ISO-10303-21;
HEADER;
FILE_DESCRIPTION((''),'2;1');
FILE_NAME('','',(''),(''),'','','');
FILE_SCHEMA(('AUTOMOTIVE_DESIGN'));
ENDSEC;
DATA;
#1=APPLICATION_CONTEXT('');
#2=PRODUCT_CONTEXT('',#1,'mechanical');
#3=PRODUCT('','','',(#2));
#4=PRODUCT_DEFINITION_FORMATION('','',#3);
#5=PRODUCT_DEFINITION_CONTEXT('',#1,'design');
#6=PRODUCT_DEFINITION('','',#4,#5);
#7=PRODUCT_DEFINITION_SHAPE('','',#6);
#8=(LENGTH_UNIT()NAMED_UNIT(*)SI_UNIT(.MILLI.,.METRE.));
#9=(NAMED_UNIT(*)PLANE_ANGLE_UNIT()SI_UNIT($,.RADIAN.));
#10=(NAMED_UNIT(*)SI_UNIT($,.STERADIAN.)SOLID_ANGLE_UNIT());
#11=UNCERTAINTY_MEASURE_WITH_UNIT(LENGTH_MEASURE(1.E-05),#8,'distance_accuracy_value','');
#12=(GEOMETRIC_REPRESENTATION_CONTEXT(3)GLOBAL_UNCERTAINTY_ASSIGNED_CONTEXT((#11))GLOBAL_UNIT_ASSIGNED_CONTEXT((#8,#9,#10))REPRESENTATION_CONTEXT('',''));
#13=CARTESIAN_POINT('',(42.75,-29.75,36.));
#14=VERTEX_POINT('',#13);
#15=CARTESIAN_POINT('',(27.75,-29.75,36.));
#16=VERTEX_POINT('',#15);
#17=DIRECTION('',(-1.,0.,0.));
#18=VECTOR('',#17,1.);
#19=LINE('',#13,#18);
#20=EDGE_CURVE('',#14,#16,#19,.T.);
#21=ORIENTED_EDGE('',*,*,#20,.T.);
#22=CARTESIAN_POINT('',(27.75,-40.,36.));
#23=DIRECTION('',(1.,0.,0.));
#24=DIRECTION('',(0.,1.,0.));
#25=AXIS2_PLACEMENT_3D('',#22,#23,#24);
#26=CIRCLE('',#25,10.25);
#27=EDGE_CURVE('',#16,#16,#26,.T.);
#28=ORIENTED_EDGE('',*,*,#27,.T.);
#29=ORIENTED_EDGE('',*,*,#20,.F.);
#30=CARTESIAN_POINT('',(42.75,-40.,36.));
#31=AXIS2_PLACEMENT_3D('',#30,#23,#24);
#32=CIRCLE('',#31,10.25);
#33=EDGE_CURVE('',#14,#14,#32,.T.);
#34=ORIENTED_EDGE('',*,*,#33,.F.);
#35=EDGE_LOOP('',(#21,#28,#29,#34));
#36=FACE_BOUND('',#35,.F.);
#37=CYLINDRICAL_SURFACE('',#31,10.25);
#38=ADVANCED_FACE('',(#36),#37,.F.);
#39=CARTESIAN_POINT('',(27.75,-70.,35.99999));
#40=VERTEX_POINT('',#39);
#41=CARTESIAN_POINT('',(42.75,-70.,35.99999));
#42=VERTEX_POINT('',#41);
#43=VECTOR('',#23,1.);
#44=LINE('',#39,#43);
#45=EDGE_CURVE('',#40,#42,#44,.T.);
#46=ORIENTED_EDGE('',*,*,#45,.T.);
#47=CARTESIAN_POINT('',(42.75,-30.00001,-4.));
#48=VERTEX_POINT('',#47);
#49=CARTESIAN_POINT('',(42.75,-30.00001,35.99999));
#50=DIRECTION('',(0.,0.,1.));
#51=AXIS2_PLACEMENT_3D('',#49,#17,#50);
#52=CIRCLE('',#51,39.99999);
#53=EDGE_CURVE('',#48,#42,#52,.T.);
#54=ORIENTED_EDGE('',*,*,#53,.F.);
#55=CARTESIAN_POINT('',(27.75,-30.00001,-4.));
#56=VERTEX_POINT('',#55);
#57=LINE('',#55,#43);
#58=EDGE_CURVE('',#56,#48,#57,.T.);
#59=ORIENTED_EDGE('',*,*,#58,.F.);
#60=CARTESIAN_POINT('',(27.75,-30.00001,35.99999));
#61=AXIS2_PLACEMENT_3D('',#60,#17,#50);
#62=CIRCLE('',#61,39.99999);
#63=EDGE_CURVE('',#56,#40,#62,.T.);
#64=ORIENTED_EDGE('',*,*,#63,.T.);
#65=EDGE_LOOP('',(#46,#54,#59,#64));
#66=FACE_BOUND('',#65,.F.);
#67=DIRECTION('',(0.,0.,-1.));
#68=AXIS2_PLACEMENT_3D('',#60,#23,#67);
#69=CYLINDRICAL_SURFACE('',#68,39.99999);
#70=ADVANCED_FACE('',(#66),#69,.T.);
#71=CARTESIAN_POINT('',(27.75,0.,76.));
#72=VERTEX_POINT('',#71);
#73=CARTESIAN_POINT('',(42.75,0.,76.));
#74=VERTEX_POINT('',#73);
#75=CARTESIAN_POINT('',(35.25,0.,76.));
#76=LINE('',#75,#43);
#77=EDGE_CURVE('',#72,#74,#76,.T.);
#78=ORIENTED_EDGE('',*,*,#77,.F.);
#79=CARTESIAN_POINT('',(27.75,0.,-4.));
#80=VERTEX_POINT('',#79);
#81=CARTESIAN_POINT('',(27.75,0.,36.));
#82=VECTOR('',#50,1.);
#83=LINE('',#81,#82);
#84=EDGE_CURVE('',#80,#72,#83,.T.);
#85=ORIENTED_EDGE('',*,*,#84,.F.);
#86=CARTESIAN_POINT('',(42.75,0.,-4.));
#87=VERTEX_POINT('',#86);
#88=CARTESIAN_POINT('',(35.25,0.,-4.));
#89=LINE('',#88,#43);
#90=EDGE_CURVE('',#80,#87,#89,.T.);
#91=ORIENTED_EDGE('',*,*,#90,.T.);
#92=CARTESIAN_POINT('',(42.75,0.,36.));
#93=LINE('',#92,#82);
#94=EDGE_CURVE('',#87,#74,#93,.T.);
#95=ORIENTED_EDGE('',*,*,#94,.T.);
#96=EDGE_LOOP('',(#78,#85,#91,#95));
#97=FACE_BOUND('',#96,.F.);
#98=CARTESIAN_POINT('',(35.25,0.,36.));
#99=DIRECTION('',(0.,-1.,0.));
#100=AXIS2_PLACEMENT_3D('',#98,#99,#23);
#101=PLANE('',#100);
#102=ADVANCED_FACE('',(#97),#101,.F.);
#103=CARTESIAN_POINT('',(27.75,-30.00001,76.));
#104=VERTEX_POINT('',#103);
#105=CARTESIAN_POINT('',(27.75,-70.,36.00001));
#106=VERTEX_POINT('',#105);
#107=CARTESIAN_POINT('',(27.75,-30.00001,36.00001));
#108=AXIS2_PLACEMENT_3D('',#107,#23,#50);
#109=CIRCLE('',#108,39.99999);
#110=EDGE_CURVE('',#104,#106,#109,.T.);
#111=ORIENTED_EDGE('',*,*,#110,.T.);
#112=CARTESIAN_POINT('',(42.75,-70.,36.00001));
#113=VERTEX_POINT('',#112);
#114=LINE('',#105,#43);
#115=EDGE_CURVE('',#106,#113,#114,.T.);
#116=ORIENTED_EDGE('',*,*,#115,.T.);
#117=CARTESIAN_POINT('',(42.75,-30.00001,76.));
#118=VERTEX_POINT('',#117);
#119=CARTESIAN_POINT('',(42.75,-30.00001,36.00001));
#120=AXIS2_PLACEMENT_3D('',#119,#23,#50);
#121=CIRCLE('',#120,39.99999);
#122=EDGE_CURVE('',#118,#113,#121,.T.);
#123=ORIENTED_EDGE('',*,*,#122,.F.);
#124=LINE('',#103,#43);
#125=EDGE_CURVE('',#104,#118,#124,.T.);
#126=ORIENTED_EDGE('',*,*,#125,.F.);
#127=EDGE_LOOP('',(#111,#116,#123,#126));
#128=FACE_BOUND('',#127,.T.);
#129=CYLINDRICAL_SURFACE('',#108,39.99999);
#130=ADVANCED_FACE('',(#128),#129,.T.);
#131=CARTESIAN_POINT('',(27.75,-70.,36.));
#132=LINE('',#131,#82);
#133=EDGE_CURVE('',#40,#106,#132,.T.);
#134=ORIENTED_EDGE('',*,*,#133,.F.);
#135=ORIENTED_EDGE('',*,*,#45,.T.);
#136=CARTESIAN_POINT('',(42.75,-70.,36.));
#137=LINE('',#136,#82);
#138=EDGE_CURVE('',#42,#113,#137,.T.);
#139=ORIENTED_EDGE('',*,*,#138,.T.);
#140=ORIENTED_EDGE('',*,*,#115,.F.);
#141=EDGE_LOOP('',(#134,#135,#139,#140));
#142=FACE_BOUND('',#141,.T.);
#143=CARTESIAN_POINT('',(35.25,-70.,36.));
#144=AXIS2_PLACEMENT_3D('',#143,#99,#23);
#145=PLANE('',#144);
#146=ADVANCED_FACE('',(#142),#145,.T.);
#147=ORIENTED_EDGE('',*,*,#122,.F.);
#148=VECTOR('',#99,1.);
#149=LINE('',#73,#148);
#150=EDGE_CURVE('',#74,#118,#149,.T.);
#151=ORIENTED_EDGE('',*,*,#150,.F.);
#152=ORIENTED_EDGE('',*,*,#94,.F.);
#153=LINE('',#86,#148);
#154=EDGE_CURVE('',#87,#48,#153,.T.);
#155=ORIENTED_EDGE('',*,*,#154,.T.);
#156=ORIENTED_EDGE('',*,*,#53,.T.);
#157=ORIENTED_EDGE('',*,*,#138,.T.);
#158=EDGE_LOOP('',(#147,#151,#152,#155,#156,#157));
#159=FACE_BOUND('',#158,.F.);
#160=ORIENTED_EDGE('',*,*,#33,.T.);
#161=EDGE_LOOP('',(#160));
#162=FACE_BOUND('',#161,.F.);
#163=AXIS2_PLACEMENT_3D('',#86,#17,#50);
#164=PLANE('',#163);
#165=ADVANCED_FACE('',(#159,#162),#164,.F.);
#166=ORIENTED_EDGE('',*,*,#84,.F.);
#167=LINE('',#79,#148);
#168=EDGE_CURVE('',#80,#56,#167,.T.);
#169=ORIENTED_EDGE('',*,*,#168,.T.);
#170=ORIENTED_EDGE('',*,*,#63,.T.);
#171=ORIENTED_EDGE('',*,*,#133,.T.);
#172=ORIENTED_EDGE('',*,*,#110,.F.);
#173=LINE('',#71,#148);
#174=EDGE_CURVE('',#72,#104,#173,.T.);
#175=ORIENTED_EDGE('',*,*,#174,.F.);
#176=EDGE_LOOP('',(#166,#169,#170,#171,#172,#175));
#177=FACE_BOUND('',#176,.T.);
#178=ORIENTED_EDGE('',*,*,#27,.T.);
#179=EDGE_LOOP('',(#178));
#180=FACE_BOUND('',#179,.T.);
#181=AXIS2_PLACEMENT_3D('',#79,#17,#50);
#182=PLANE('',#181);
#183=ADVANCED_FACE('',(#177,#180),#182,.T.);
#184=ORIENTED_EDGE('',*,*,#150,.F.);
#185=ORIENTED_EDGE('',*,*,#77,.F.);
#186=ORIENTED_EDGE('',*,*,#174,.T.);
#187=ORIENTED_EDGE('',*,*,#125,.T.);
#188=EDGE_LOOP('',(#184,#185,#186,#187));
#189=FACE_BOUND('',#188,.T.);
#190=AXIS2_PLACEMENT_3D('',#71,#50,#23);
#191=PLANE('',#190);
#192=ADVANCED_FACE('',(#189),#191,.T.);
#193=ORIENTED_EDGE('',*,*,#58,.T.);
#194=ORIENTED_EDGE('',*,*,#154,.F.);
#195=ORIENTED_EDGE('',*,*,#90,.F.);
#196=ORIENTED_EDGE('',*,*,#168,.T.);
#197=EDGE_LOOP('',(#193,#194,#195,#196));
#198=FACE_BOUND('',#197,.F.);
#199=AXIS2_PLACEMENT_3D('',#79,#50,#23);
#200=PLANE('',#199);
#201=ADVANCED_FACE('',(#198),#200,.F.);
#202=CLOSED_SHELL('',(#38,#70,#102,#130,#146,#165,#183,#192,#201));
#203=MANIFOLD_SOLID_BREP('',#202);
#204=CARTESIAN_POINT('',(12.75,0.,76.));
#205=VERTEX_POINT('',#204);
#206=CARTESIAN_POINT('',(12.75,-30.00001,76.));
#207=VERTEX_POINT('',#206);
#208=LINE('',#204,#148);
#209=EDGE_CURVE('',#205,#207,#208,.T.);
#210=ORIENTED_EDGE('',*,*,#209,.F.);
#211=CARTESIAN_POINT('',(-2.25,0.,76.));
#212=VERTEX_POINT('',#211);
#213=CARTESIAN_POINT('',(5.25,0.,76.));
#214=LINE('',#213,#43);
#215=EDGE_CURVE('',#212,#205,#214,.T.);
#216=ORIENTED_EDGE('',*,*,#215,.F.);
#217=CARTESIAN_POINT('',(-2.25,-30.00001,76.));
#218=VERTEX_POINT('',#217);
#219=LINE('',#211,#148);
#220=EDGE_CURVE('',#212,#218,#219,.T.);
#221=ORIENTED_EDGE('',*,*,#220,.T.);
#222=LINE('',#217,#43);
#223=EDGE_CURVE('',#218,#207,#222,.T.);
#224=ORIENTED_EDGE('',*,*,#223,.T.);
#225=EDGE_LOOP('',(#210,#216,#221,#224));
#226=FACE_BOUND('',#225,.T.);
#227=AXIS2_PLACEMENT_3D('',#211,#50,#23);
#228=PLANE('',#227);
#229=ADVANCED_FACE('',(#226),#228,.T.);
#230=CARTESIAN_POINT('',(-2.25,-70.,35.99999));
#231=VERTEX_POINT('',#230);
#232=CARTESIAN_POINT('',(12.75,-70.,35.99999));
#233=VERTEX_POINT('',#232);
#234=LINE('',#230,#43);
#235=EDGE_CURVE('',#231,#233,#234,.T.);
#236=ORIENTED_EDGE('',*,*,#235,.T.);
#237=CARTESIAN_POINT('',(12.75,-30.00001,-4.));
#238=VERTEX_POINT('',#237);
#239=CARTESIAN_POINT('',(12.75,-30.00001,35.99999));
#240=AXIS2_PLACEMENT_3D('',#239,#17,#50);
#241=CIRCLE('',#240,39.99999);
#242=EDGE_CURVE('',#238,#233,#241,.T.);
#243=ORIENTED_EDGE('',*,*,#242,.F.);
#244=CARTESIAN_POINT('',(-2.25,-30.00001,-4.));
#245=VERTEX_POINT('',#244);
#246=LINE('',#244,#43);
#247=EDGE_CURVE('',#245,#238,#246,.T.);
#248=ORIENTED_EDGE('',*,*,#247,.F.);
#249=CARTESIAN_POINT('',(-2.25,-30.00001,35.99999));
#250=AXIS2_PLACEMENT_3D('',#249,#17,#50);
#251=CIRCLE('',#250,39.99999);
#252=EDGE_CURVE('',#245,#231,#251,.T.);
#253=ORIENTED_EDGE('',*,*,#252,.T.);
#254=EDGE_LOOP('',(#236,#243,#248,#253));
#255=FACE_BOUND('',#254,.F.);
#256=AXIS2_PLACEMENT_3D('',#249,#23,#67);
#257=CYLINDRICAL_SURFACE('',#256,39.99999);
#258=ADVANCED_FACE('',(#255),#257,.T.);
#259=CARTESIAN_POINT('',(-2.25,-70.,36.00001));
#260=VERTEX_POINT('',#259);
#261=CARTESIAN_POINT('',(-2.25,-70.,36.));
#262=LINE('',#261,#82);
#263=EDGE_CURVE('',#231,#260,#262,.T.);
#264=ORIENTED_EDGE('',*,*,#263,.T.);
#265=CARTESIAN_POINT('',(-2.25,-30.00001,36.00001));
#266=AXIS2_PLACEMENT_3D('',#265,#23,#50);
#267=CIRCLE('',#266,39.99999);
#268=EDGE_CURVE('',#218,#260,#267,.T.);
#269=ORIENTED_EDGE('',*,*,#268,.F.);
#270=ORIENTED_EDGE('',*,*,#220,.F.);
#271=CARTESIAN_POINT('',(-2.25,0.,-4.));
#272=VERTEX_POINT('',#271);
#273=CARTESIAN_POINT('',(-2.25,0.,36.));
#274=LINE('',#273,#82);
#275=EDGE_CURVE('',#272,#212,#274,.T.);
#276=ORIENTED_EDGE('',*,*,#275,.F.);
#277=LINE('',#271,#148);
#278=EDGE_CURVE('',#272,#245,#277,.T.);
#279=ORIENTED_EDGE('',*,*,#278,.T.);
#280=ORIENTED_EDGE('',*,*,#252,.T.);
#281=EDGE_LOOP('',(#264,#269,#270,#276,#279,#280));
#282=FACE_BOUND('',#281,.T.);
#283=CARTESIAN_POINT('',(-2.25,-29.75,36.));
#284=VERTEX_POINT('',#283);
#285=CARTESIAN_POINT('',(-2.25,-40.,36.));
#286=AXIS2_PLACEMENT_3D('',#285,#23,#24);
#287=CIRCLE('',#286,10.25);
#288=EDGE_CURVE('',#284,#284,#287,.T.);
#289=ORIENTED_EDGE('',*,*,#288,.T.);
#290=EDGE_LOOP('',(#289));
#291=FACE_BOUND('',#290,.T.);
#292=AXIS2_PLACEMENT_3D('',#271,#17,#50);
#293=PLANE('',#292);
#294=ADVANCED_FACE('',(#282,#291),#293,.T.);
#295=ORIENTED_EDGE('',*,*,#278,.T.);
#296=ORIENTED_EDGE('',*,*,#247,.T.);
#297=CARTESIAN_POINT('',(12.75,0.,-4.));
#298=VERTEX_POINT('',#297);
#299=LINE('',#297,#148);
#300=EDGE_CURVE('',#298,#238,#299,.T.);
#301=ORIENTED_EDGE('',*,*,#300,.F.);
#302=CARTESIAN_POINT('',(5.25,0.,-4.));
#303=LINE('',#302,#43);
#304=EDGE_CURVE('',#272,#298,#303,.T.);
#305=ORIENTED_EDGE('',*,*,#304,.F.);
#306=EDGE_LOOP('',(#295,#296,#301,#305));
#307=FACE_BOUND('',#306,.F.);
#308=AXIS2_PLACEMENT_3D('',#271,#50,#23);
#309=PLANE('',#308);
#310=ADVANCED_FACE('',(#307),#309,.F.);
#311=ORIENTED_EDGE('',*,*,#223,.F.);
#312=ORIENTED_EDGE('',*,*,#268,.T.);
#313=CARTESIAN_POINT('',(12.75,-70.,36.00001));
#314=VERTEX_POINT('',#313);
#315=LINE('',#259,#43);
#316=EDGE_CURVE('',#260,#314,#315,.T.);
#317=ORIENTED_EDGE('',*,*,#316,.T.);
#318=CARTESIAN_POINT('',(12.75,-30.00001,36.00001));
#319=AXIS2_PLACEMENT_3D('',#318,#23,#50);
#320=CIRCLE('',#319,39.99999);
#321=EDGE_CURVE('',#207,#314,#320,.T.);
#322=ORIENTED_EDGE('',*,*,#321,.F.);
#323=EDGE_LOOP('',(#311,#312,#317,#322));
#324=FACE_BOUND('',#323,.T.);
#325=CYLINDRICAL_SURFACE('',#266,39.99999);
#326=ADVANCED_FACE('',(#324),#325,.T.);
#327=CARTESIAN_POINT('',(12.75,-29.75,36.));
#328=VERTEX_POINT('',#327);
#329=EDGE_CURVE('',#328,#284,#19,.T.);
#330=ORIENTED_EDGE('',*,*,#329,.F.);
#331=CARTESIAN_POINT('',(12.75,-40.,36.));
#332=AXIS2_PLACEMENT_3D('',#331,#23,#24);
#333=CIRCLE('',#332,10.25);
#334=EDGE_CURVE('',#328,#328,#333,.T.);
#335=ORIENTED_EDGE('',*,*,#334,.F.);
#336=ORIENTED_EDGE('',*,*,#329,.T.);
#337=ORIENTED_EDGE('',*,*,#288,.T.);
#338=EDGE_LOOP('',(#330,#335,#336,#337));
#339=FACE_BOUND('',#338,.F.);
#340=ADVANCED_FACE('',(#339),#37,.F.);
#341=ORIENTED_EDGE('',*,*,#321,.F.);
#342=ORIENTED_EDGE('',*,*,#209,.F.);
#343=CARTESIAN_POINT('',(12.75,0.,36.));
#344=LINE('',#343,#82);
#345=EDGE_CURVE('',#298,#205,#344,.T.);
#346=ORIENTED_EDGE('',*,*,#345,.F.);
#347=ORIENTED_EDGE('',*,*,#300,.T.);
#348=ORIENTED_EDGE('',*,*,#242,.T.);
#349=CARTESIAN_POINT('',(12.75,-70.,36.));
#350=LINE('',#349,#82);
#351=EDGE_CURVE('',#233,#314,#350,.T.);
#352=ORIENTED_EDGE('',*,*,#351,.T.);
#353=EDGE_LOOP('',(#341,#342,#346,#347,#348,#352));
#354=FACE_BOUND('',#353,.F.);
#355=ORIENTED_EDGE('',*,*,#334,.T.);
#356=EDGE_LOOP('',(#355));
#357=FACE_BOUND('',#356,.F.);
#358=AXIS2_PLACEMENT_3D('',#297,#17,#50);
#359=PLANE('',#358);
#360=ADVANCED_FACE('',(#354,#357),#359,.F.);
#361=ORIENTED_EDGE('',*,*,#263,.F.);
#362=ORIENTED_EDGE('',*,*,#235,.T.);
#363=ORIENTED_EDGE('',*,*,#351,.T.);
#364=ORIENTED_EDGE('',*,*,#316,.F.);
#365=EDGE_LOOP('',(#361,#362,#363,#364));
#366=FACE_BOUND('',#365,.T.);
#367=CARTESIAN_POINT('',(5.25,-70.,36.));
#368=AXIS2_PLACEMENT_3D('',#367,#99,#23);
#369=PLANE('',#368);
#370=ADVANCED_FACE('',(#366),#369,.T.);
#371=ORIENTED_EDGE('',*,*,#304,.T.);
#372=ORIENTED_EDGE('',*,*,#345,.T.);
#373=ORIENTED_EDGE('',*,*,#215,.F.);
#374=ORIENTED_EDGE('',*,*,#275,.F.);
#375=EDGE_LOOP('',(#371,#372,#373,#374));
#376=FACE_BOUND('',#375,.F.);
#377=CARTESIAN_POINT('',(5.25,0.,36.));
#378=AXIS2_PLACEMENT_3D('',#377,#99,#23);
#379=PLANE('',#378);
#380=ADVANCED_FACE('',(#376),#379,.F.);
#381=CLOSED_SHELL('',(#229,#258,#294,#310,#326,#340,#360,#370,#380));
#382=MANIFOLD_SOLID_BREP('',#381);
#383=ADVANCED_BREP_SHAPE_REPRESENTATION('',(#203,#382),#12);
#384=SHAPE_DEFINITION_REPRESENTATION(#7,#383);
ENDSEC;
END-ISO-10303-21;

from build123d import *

# Parameters (mm, degrees)
F0_W     = 15
F0_H     = 80
F1_DEPTH = 70
F2_R     = 39.99999
F2_2_R   = 39.99999
F3_R     = 10.25
F4_DEPTH = 86.5
F5_R     = 10.25
F6_DEPTH = 25


# Not quite as in the source:
# - a fillet or chamfer is up to 0.001 mm smaller than in the source, because OpenCascade refuses the exact size


with BuildPart() as f1:
    # F0 (on Front) → F1 (new body)
    with BuildSketch(Plane.XZ):
        with Locations((5.25, 36)):
            Rectangle(F0_W, F0_H)
    extrude(amount=F1_DEPTH)

    # F2 (radius 40 in the source; OpenCascade refuses exactly that, so slightly less here)
    f2_edges = [f1.edges().sort_by_distance(p)[0] for p in [
        (5.25, -70, 76),
        (5.25, -70, -4),
    ]]
    fillet(f2_edges, radius=F2_R)


with BuildPart() as f1b:
    # F0 (on Front) → F1, piece 2 (new body)
    with BuildSketch(Plane.XZ):
        with Locations((35.25, 36)):
            Rectangle(F0_W, F0_H)
    extrude(amount=F1_DEPTH)

    # F2#2 (radius 40 in the source; OpenCascade refuses exactly that, so slightly less here)
    f2_2_edges = [f1b.edges().sort_by_distance(p)[0] for p in [
        (35.25, -70, 76),
        (35.25, -70, -4),
    ]]
    fillet(f2_2_edges, radius=F2_2_R)


with BuildPart() as f4_tool:
    # F3 (on face) → F4 (new body)
    with BuildSketch(Plane.YZ.offset(42.75)):
        with Locations((-40, 36)):
            Circle(F3_R)
    extrude(amount=-F4_DEPTH)


with BuildPart() as f1_1:
    add(f1.part)

    # F4: cut by f4_tool
    add(f4_tool.part, mode=Mode.SUBTRACT)

    # F5 (on face) → F6 (cut)
    with BuildSketch(Plane(origin=(-2.25, 0, 0), x_dir=(0, -1, 0), z_dir=(-1, 0, 0))):
        with Locations((40, 36)):
            Circle(F5_R)
    extrude(amount=-F6_DEPTH, mode=Mode.SUBTRACT)


with BuildPart() as f1b_1:
    add(f1b.part)

    # F4: cut by f4_tool
    add(f4_tool.part, mode=Mode.SUBTRACT)


solid = Compound([f1_1.part, f1b_1.part])
